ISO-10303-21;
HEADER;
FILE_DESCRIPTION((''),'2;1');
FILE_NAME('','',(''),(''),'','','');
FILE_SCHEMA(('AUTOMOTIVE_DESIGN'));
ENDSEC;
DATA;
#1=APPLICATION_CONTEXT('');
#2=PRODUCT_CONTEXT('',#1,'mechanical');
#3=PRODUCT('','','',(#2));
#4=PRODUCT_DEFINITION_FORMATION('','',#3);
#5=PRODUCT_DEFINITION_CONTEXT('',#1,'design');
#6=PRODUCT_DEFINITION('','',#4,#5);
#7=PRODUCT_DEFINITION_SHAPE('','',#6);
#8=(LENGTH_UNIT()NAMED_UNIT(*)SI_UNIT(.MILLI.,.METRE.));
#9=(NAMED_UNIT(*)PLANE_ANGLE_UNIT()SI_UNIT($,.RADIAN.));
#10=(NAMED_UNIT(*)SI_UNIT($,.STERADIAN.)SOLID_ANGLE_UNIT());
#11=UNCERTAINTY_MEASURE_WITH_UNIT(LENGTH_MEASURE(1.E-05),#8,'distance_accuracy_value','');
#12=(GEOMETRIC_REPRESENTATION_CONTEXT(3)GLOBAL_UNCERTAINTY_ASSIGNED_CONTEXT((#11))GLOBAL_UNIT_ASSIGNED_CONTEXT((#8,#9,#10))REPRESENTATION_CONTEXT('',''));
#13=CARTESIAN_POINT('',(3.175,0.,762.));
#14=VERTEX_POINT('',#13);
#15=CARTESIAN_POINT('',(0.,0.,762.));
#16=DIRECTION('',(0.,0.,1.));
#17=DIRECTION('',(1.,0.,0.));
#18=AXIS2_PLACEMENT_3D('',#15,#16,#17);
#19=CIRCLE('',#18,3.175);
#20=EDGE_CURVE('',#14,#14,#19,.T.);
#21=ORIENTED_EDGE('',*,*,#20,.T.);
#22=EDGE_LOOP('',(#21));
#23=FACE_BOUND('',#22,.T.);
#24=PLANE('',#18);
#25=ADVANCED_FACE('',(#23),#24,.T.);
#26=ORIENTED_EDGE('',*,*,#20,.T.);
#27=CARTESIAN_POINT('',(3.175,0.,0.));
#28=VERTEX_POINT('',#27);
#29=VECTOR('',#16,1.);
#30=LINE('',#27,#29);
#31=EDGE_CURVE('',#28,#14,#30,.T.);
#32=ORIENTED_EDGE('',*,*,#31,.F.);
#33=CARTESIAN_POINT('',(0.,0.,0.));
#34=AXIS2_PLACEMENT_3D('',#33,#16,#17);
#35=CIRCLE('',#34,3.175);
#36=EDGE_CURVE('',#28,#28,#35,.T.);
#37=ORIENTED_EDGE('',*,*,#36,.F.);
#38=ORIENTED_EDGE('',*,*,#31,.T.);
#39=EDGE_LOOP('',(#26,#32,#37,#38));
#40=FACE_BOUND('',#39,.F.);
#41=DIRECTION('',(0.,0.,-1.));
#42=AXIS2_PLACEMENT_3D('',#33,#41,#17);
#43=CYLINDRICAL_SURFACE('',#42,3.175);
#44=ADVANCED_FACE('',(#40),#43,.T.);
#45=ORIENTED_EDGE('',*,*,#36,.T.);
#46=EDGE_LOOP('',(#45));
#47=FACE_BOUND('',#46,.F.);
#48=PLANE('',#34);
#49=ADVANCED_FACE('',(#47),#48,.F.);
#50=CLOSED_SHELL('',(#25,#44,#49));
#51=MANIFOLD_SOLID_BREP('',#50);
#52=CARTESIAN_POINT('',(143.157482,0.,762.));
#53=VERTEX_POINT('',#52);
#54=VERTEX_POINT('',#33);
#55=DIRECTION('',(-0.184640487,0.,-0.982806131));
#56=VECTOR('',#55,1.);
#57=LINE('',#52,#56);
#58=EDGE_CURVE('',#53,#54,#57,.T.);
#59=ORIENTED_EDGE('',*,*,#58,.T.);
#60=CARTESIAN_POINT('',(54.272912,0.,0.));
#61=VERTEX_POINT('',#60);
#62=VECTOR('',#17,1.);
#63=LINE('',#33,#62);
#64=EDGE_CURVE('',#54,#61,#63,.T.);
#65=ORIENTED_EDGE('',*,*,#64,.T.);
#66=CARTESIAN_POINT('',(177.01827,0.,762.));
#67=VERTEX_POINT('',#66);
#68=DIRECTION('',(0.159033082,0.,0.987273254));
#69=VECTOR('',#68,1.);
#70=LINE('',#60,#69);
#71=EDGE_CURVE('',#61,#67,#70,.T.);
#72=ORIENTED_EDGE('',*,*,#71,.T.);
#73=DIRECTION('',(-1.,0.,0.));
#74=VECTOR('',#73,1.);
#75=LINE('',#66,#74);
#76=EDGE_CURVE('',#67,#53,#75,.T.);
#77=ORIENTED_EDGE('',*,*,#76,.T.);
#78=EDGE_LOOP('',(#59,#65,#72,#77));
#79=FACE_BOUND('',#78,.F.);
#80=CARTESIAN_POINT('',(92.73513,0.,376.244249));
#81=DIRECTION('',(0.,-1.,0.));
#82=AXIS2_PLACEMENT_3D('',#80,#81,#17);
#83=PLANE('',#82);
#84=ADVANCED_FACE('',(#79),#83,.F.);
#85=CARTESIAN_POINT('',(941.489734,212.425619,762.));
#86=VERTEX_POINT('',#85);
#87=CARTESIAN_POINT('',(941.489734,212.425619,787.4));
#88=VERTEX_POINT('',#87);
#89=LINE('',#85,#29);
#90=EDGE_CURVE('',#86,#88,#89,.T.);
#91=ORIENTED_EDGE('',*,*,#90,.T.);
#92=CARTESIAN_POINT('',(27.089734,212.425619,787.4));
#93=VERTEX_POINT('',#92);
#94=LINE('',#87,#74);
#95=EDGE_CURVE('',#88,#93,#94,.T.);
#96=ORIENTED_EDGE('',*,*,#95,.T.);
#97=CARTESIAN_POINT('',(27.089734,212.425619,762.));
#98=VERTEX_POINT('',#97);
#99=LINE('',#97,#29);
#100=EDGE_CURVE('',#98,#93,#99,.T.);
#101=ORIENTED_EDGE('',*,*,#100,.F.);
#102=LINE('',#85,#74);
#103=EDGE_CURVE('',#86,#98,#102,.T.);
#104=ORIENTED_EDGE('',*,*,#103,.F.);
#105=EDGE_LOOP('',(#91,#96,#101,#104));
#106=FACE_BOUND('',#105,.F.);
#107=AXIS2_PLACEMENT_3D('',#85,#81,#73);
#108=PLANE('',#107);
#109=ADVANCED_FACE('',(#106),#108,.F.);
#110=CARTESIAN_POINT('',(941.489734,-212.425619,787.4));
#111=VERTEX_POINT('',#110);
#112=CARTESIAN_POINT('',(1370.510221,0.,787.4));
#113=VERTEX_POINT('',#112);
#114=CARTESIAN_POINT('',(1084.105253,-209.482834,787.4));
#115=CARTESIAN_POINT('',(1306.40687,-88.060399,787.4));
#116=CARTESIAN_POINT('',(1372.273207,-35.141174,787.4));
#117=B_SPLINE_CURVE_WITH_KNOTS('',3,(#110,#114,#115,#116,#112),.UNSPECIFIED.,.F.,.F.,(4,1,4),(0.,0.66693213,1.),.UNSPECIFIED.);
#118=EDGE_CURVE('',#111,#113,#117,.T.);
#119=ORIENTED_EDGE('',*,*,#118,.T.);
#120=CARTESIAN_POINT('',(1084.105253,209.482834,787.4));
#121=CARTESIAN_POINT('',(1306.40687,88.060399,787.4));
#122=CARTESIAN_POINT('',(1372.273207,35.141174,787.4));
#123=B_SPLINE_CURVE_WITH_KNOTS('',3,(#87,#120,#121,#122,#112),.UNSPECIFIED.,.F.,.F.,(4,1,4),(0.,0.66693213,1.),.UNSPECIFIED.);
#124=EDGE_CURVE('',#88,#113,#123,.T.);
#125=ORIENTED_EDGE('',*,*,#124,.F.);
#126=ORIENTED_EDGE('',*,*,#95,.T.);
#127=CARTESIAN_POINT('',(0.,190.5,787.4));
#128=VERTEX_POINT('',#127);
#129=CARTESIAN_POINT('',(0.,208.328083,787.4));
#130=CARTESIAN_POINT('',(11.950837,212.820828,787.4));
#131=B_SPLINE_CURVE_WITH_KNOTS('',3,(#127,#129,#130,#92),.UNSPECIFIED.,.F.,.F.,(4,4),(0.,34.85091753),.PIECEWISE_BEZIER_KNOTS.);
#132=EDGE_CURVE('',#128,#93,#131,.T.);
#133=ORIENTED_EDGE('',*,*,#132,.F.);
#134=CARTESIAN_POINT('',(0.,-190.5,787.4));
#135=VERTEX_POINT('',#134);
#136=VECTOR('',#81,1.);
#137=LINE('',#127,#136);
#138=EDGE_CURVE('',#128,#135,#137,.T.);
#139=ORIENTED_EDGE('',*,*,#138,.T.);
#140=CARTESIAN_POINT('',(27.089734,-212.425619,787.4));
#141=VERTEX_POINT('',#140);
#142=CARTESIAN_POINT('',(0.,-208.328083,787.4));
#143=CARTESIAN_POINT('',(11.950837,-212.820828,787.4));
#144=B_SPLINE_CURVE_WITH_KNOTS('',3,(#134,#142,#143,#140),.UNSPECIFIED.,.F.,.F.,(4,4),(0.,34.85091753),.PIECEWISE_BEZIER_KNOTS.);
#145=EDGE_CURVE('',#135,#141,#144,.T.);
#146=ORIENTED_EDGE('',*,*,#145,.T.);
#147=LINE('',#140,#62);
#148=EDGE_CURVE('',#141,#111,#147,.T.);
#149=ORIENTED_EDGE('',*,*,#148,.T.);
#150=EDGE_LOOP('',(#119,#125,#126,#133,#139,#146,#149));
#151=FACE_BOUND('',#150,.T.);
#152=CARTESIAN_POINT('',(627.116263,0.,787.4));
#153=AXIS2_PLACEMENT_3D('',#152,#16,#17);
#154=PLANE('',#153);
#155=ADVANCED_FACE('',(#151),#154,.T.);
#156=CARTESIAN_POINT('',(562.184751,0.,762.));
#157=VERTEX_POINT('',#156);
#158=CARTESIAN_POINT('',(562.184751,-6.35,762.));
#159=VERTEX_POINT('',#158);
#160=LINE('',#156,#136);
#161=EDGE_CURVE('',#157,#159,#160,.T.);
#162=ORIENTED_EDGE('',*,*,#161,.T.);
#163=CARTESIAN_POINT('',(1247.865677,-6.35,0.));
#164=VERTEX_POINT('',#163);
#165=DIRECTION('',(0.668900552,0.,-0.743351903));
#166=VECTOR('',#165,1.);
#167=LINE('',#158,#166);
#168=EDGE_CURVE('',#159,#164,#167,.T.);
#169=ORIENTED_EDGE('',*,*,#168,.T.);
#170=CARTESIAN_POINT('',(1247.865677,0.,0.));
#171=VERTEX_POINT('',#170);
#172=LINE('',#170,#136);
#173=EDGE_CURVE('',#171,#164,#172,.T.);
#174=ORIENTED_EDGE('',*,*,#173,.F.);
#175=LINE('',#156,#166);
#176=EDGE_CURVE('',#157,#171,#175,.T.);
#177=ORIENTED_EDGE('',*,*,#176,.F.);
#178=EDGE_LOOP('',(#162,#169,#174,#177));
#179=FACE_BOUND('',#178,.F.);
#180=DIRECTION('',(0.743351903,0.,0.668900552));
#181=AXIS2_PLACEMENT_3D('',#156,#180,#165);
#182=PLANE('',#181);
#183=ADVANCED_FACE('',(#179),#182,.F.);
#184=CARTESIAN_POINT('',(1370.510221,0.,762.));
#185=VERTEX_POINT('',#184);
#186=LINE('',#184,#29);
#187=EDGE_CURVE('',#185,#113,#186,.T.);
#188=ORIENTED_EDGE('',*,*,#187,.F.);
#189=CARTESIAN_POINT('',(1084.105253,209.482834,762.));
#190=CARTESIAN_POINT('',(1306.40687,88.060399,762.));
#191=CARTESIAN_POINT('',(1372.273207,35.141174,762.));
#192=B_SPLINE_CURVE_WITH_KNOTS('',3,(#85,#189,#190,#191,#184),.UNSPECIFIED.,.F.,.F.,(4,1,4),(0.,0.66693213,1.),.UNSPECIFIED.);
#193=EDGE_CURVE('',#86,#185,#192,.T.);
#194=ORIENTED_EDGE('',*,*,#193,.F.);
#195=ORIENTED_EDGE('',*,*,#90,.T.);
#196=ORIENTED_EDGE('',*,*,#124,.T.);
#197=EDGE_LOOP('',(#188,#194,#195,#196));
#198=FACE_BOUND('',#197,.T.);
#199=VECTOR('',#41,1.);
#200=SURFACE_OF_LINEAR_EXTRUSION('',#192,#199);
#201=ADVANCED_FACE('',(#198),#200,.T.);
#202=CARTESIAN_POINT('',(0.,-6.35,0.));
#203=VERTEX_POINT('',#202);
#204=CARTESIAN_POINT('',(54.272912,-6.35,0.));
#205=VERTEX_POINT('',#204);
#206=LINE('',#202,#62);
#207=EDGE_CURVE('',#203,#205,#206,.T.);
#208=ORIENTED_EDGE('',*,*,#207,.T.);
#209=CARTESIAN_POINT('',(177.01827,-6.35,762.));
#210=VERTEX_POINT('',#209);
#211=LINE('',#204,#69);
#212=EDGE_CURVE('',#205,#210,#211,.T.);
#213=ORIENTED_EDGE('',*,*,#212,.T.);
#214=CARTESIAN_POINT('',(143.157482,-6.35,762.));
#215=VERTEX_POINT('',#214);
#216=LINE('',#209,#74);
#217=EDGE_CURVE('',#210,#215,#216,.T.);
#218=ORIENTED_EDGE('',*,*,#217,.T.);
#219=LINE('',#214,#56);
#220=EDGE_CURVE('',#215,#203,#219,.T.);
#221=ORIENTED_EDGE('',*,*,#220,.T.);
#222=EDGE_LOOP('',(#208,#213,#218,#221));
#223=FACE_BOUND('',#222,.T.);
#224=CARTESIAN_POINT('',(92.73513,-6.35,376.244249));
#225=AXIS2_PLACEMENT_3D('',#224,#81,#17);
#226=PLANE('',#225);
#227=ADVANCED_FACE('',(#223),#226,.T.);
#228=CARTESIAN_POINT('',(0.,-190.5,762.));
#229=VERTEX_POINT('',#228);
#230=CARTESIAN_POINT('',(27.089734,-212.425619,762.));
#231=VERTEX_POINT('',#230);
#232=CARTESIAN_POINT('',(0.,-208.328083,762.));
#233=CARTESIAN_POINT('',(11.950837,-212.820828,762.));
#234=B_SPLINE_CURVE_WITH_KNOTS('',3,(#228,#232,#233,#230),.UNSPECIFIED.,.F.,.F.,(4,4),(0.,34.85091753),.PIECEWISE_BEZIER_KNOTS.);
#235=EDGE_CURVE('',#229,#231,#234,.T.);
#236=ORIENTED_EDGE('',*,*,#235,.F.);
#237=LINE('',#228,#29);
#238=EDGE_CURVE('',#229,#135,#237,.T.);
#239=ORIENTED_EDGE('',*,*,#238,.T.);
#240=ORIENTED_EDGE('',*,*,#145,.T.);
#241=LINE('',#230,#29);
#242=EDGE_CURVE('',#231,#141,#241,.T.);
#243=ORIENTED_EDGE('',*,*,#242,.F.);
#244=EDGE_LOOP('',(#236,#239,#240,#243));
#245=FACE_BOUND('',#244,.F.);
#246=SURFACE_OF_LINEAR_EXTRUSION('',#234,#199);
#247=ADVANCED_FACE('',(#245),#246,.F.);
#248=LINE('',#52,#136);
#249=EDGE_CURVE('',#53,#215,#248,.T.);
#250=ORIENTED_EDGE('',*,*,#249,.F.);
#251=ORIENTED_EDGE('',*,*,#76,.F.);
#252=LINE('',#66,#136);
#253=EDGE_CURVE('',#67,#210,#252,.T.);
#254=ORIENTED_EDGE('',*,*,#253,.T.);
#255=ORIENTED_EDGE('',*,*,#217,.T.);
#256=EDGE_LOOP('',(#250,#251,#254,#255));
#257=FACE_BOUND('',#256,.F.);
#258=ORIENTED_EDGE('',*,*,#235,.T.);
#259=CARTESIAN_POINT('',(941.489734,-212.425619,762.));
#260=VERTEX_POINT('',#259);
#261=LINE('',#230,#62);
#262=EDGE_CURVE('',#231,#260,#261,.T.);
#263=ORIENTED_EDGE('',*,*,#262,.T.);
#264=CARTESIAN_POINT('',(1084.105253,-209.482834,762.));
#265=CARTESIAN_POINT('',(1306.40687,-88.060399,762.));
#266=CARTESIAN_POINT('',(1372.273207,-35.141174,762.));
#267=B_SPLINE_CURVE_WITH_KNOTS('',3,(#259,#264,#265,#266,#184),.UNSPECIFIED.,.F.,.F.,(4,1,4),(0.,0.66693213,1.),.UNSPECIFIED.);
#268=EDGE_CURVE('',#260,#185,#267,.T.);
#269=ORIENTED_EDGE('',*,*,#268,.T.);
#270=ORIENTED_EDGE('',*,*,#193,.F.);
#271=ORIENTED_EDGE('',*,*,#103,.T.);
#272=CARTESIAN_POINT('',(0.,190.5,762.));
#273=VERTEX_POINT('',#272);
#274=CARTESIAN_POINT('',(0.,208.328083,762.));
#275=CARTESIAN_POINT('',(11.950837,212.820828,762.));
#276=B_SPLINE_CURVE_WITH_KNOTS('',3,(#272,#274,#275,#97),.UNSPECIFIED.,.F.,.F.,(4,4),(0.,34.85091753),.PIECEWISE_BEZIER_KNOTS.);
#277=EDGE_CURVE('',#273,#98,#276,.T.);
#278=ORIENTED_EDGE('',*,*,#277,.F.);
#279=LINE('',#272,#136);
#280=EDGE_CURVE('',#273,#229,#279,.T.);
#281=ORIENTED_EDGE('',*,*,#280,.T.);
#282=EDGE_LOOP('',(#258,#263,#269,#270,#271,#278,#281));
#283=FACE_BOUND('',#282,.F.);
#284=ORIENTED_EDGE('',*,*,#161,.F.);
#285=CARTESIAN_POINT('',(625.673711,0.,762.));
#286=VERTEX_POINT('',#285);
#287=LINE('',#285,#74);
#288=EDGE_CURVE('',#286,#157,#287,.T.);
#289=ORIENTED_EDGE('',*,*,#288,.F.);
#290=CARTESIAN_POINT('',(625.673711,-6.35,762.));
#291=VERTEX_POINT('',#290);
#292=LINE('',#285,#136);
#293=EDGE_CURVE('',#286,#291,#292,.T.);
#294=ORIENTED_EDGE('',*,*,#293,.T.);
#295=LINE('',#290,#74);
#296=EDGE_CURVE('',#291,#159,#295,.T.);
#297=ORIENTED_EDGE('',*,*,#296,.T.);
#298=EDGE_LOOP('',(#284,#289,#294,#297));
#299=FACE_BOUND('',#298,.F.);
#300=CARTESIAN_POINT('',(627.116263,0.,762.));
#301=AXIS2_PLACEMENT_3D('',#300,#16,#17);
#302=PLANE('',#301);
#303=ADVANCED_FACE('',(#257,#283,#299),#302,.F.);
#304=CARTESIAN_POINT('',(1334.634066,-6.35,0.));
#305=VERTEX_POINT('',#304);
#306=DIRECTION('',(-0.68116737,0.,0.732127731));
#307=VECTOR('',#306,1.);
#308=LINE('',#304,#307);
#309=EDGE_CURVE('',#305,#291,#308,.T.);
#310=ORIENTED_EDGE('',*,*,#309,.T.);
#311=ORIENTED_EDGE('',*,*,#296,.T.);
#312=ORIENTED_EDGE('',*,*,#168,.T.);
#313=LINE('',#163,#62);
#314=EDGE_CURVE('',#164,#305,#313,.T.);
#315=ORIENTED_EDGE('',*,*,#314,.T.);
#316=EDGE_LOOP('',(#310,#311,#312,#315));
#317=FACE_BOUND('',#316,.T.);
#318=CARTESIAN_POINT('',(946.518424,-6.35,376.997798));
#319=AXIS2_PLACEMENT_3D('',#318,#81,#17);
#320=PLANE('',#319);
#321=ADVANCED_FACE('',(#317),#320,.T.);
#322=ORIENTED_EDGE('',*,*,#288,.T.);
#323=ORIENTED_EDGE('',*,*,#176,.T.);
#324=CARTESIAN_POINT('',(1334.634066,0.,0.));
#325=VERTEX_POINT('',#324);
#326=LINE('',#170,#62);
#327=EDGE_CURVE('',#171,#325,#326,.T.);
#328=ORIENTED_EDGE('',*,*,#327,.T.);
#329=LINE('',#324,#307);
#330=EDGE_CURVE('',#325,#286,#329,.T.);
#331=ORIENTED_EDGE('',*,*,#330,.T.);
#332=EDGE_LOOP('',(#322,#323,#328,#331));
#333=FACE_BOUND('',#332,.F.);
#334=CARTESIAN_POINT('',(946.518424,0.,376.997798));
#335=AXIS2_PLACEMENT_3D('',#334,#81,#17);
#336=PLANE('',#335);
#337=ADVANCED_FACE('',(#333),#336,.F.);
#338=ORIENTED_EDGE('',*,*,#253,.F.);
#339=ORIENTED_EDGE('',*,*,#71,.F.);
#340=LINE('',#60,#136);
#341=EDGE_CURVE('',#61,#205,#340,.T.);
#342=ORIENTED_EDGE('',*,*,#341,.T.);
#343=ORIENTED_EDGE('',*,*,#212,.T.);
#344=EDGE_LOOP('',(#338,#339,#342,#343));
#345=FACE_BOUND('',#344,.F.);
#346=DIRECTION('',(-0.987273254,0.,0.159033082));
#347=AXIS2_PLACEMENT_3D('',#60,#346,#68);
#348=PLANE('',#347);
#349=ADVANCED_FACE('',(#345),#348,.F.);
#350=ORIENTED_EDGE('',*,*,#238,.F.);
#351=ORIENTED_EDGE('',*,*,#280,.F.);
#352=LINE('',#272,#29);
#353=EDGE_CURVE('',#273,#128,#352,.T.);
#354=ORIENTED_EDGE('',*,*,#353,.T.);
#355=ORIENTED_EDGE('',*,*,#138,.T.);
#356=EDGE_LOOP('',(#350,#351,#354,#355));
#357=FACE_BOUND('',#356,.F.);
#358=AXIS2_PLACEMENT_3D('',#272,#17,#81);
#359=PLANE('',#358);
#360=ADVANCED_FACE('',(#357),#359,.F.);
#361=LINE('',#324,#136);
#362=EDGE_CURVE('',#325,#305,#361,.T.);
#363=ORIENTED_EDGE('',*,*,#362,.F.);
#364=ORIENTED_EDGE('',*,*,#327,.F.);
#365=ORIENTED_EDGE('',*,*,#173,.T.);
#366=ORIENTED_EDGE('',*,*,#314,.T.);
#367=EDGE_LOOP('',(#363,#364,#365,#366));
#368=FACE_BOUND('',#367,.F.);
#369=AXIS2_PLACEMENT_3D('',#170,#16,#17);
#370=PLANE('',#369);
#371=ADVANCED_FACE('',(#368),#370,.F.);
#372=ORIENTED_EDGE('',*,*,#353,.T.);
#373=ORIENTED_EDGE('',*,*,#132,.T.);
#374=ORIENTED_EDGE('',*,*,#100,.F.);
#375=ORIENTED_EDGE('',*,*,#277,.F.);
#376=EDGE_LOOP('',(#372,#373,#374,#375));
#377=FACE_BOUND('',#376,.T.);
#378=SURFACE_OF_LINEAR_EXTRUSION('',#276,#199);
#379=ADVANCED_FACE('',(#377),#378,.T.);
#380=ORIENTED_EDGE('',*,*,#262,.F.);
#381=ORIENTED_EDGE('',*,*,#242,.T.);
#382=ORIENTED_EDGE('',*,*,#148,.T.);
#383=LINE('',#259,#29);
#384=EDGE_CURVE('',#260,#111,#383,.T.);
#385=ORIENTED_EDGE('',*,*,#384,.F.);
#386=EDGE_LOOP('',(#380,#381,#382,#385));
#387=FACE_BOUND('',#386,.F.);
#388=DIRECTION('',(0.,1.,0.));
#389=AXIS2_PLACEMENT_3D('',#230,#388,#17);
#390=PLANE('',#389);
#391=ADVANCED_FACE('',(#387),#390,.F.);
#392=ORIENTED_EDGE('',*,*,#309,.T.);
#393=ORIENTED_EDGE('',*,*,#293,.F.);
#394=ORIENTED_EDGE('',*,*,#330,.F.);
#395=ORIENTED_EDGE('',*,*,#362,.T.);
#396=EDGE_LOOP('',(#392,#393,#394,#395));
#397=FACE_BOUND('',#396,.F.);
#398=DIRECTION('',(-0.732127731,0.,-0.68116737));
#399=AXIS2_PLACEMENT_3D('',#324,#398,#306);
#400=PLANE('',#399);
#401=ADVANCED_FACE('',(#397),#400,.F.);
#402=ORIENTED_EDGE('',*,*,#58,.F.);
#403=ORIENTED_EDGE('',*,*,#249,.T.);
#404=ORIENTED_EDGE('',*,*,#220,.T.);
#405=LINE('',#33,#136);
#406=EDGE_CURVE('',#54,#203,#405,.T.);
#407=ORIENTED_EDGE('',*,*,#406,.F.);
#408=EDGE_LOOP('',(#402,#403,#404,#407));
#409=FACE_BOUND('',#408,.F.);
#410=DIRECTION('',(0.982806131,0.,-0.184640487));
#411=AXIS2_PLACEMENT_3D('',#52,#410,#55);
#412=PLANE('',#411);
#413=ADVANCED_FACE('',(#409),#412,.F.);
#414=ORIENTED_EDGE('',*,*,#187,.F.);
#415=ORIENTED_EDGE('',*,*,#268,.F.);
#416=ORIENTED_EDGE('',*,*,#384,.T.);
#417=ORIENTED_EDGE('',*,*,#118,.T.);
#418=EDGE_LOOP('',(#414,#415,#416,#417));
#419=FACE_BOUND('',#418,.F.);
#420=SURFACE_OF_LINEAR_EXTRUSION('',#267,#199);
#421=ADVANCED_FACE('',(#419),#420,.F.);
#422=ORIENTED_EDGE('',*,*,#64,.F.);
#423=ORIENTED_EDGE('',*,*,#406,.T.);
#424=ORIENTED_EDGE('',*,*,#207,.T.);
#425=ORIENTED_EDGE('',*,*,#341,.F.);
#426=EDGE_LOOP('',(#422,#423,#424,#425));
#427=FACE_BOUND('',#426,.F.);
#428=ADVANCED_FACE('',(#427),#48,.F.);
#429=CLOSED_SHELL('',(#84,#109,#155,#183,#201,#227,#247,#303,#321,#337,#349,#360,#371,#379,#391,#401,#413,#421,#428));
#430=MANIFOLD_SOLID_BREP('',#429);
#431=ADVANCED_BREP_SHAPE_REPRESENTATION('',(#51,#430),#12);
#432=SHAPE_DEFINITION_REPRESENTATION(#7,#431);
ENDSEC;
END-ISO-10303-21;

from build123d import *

# Parameters (mm, degrees)
F1_R     = 3.175
F2_DEPTH = 762
F3_DEPTH = 6.35
F5_DEPTH = 25.4


with BuildPart() as f2:
    # F1 (on Top) → F2 (new body)
    with BuildSketch(Plane.XY):
        Circle(F1_R)
    extrude(amount=F2_DEPTH)


with BuildPart() as f3:
    # F0 (on Front) → F3 (new body)
    with BuildSketch(Plane.XZ):
        Polygon((1247.8656768799, 0), (1334.6340656281, 0), (625.6737112999, 762), (562.1847510338, 762), align=None)
    extrude(amount=F3_DEPTH)



with BuildPart() as f3b:
    # F0 (on Front) → F3, piece 2 (new body)
    with BuildSketch(Plane.XZ):
        Polygon((143.1574821472, 762), (0, 0), (54.2729124427, 0), (177.0182698965, 762), align=None)
    extrude(amount=F3_DEPTH)


with BuildPart() as f3_1:
    add(f3.part)

    add(f3b.part)  # F5 merges F3b
    # F4 (on face) → F5 (join)
    with BuildSketch(Plane.XY.offset(762)):
        with BuildLine():
            Line((0, 190.5), (0, 0))
            Line((0, 0), (0, -190.5))
            add(Edge.make_bspline(
                [(0, -190.5), (0, -208.3280831575), (11.9508374482, -212.820827961), (27.0897336304, -212.4256193638)],
                knots=[0, 0, 0, 0, 34.8509175296, 34.8509175296, 34.8509175296, 34.8509175296], degree=3))
            Line((27.0897336304, -212.4256193638), (941.4897336304, -212.4256193638))
            add(Edge.make_bspline(
                [(941.4897336304, -212.4256193638), (1084.1052532196, -209.4828337431), (1306.4068704852, -88.0603993583), (1372.2732067108, -35.1411737502), (1370.5102205276, 0)],
                knots=[0, 0, 0, 0, 0.6669321304, 1, 1, 1, 1], degree=3))
            add(Edge.make_bspline(
                [(941.4897336304, 212.4256193638), (1084.1052532196, 209.4828337431), (1306.4068704852, 88.0603993583), (1372.2732067108, 35.1411737502), (1370.5102205276, 0)],
                knots=[0, 0, 0, 0, 0.6669321304, 1, 1, 1, 1], degree=3))
            Line((941.4897336304, 212.4256193638), (27.0897336304, 212.4256193638))
            add(Edge.make_bspline(
                [(0, 190.5), (0, 208.3280831575), (11.9508374482, 212.820827961), (27.0897336304, 212.4256193638)],
                knots=[0, 0, 0, 0, 34.8509175296, 34.8509175296, 34.8509175296, 34.8509175296], degree=3))
        make_face()
    extrude(amount=F5_DEPTH)


solid = Compound([f2.part, f3_1.part])
